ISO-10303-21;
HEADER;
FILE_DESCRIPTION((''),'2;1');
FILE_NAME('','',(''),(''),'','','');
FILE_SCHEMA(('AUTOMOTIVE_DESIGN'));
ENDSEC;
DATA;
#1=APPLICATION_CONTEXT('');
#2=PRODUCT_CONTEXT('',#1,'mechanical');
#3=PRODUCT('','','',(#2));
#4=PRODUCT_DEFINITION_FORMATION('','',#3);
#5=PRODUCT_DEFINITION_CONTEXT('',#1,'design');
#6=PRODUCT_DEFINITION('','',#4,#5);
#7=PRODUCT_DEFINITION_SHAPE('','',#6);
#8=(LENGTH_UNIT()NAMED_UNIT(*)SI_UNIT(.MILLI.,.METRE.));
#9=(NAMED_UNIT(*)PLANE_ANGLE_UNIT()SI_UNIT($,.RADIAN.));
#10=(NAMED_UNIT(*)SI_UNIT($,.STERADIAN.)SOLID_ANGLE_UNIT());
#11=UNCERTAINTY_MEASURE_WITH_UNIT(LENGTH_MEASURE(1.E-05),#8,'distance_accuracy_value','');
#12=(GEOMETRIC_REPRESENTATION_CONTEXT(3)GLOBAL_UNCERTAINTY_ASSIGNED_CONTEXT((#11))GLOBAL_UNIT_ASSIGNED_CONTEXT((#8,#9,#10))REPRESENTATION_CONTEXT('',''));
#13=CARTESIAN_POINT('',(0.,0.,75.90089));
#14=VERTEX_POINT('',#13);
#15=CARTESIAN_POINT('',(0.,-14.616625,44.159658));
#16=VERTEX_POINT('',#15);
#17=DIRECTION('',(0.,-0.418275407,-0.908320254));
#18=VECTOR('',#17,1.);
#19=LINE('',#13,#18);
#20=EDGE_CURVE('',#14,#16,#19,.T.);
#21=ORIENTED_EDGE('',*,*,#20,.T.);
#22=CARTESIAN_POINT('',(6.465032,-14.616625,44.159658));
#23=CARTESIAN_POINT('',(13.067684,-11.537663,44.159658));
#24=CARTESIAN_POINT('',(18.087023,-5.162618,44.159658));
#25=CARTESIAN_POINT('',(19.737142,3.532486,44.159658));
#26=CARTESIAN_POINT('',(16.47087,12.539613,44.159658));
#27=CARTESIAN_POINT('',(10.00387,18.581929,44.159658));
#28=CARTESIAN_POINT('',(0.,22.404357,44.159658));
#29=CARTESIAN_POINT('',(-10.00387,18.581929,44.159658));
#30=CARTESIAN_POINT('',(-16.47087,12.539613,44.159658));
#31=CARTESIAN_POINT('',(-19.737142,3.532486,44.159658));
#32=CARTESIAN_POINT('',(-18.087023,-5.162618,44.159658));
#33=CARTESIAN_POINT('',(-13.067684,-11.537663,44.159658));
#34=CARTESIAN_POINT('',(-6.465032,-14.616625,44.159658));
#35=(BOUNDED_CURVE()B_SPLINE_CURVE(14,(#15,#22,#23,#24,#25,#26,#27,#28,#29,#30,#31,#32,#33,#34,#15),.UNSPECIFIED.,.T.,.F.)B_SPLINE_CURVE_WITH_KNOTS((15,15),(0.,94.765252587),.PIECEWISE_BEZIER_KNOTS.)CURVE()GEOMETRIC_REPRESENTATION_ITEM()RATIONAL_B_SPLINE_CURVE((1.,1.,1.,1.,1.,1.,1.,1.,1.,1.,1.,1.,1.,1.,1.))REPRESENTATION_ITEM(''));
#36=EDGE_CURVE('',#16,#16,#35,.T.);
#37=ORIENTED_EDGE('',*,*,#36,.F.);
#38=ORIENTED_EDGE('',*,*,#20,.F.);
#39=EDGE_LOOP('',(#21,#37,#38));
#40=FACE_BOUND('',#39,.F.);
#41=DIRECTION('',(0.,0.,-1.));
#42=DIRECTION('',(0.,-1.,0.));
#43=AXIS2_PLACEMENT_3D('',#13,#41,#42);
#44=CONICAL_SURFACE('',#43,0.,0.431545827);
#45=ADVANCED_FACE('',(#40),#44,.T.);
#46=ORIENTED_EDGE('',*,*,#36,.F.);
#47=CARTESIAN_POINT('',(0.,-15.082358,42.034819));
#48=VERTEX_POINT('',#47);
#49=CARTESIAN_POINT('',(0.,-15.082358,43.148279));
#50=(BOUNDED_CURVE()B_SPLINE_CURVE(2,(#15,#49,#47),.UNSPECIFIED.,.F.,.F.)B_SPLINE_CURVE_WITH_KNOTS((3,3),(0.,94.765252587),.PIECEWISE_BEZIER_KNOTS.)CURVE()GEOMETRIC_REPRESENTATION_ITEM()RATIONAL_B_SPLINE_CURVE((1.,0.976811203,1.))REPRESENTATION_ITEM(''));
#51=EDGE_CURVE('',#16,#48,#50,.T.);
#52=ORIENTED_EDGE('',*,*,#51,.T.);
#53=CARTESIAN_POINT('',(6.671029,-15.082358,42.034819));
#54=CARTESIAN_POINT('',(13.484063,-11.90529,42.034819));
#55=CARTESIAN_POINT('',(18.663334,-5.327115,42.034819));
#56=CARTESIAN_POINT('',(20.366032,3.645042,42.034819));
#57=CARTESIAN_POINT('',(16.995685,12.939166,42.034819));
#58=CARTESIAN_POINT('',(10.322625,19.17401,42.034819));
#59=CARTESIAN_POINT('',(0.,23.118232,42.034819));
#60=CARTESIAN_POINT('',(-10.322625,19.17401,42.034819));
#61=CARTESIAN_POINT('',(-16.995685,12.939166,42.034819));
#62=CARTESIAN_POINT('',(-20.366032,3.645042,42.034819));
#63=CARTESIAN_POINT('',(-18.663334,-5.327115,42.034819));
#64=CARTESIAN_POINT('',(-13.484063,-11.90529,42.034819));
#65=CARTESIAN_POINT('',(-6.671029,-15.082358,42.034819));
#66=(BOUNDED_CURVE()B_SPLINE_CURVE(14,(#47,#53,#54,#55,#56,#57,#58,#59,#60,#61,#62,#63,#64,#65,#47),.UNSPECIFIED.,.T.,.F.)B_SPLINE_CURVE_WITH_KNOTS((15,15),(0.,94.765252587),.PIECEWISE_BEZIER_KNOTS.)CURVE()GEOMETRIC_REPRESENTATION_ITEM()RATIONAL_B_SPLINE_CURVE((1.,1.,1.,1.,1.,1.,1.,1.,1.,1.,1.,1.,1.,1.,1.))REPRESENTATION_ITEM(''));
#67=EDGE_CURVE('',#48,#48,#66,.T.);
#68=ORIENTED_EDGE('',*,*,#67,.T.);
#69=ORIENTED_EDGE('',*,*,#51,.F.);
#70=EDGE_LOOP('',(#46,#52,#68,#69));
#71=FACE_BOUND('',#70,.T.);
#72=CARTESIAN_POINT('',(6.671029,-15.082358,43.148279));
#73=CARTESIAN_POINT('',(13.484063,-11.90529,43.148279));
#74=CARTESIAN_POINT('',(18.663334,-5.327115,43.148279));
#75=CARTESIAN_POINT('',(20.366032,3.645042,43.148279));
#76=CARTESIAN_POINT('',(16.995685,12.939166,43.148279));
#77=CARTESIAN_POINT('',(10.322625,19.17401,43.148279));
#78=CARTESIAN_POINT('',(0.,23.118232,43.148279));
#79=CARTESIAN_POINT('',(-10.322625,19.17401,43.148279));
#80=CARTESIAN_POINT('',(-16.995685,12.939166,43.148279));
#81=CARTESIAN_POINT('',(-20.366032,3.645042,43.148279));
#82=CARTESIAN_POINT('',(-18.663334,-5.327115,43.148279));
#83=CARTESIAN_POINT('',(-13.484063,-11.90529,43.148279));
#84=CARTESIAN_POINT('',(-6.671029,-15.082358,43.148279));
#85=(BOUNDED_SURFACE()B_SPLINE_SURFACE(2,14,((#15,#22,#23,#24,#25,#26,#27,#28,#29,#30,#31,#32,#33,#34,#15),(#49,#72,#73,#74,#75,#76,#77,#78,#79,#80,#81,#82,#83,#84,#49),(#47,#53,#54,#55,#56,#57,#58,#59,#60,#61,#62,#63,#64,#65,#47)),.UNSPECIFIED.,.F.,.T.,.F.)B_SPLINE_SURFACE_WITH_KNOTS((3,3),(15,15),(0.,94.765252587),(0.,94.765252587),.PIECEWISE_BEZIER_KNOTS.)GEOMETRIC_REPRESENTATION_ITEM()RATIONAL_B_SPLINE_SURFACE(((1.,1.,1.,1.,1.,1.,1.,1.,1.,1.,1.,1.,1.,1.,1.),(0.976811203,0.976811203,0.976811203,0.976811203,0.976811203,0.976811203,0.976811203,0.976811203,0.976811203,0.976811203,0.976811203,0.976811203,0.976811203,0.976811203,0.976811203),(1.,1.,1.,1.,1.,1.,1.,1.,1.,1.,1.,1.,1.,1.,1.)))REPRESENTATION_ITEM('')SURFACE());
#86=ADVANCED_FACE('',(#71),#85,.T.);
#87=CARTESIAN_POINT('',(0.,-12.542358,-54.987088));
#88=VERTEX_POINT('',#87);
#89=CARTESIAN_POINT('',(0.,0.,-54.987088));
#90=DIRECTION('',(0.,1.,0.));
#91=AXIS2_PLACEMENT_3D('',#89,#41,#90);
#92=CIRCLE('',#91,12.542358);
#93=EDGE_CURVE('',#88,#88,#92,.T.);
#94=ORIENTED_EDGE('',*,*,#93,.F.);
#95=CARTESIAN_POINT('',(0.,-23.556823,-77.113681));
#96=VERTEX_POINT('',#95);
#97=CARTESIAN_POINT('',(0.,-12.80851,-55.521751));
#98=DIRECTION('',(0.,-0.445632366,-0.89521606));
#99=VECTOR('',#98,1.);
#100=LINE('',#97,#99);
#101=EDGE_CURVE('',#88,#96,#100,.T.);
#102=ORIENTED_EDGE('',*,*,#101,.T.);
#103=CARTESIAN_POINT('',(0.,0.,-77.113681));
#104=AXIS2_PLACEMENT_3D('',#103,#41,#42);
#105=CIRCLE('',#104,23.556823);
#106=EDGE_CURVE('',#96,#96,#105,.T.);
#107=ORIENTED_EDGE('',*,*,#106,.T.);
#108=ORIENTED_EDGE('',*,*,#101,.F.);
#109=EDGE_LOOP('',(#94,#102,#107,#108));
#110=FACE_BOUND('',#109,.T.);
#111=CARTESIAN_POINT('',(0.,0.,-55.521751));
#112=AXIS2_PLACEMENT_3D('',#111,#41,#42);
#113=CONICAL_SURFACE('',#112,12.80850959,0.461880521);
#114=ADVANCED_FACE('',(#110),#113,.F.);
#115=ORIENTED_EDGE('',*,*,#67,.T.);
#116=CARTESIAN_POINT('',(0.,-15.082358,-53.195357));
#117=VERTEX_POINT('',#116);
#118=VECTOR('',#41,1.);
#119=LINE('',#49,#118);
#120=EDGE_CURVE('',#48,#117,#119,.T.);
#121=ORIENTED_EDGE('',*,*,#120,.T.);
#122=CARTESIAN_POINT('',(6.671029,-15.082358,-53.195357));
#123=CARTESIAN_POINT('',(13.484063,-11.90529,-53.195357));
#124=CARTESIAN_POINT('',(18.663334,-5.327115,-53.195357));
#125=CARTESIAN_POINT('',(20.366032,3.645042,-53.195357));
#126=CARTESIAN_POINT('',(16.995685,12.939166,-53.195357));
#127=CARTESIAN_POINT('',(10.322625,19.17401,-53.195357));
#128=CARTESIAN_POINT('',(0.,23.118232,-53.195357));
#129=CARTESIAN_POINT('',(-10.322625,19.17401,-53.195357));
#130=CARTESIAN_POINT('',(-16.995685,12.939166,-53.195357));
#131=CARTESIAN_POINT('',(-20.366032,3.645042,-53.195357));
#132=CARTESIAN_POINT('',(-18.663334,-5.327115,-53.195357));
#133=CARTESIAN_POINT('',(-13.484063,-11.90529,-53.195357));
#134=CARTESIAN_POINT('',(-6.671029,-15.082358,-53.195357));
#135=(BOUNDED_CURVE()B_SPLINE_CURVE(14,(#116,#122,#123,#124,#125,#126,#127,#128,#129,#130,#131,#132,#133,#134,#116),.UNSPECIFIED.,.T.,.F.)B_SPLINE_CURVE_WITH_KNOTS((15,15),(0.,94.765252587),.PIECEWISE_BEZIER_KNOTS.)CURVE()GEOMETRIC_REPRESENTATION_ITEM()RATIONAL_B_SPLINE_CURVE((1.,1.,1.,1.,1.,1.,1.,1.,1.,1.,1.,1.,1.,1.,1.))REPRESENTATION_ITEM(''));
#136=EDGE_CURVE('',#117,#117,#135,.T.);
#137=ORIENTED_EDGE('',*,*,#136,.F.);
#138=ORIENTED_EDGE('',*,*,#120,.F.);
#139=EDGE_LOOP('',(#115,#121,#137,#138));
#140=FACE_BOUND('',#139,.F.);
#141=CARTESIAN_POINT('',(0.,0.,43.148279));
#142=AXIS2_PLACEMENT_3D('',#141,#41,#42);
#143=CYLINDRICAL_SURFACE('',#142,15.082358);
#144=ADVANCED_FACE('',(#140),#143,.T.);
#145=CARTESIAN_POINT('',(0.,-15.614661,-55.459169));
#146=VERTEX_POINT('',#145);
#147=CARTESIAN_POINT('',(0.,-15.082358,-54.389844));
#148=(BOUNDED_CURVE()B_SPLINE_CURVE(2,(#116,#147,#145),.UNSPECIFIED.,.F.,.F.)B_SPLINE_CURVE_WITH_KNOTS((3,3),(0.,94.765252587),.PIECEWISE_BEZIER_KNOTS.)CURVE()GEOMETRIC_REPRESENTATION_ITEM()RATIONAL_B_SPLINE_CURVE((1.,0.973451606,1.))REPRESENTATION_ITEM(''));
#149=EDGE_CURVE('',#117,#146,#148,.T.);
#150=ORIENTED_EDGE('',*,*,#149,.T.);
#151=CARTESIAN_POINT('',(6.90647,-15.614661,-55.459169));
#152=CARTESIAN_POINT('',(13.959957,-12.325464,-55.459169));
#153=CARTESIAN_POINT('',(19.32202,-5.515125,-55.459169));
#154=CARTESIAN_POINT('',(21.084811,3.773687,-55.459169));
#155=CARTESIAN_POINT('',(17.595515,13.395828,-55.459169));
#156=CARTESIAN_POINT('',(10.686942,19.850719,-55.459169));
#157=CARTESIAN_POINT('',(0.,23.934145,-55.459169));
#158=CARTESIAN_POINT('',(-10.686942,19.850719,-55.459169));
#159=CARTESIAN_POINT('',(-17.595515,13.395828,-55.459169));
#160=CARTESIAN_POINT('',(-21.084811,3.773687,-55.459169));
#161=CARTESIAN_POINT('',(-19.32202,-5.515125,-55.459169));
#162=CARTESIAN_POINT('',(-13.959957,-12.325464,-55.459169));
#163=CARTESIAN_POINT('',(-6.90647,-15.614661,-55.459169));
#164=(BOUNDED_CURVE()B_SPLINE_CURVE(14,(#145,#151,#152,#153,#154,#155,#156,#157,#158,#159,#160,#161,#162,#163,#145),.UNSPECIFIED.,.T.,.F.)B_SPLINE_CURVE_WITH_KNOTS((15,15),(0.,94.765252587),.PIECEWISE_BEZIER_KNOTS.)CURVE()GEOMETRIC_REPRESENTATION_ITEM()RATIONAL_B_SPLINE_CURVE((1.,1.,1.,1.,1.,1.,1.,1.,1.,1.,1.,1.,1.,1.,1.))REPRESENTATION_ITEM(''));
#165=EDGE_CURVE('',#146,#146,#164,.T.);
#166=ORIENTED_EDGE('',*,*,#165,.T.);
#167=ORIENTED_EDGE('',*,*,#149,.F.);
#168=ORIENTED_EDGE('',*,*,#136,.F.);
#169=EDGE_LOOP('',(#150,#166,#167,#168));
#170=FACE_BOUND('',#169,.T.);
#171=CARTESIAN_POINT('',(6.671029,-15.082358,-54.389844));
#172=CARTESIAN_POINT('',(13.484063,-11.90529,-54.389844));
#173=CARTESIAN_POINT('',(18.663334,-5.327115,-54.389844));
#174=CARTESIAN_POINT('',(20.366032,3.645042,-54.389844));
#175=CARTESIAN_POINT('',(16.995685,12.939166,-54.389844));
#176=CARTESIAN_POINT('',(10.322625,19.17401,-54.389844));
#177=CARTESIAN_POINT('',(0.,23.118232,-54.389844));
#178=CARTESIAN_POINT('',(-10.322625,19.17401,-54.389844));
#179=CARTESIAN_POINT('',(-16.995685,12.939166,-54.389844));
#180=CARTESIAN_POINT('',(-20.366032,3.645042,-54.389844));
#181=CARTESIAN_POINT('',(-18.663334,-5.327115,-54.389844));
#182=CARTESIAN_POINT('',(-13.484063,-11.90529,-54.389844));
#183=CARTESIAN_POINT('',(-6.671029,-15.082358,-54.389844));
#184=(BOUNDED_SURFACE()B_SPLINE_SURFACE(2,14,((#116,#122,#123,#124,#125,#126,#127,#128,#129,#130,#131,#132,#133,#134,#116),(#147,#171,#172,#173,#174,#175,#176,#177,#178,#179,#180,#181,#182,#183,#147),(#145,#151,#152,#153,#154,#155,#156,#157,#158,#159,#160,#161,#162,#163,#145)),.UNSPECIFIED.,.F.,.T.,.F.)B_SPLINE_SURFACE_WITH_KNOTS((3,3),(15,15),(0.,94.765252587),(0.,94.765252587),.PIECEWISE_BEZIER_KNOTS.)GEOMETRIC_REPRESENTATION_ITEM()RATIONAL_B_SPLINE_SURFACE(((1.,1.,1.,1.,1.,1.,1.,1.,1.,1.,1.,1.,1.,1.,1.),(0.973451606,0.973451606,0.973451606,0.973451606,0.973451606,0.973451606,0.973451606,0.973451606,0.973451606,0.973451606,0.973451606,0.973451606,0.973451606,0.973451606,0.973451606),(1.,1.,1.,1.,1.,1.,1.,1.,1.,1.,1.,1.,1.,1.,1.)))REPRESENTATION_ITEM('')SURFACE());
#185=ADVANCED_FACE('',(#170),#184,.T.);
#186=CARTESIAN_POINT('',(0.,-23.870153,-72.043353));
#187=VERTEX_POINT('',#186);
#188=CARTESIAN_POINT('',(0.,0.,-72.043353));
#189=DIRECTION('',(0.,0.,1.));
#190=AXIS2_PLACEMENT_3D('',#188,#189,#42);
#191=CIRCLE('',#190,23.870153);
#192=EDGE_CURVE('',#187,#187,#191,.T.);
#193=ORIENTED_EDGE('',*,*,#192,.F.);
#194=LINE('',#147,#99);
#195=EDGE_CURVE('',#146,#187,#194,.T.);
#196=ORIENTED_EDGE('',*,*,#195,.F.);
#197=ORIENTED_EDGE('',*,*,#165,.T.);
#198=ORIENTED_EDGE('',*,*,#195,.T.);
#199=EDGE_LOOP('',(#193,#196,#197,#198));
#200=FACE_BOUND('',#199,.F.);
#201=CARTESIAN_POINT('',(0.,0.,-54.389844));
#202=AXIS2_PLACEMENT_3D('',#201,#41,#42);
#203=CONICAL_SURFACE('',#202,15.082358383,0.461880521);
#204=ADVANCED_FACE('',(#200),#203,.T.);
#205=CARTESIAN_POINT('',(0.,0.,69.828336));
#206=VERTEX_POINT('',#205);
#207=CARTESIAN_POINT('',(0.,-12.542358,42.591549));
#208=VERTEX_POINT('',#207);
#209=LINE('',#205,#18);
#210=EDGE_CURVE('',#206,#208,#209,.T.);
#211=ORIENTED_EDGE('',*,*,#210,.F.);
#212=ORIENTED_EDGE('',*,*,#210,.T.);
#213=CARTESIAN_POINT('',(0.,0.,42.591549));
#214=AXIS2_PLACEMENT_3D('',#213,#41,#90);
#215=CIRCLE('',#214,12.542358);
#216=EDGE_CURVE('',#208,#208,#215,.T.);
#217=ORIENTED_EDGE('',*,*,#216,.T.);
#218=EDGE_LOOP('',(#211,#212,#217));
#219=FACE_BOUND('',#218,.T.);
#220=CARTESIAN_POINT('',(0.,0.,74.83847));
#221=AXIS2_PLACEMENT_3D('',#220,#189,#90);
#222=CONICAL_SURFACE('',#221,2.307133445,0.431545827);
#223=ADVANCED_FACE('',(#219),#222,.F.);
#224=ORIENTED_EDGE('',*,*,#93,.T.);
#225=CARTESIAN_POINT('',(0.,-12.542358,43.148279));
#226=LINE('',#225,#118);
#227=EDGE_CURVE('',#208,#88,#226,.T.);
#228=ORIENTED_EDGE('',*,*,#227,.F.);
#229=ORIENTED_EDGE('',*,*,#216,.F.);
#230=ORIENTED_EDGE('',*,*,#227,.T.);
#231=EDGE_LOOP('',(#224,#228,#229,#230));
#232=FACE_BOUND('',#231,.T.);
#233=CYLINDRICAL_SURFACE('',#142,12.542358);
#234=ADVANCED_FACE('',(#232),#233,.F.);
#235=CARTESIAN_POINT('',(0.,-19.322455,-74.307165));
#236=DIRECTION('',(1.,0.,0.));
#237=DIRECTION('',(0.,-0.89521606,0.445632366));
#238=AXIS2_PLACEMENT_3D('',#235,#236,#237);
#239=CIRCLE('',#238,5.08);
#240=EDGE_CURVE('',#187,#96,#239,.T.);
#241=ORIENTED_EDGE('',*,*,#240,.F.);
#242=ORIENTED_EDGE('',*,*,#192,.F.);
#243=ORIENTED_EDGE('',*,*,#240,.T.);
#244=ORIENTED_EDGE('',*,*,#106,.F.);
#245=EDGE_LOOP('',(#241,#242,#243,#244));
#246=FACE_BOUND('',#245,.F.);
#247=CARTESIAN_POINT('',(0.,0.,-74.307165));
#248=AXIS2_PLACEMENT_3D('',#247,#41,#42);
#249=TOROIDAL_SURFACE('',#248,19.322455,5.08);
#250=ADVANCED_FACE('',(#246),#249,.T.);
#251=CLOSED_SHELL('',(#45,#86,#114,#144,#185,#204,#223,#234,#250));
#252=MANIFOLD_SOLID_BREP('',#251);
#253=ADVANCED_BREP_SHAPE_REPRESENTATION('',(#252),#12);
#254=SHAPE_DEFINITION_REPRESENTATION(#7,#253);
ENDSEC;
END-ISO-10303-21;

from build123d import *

# Parameters (mm, degrees)
F3_T = -2.54
F4_R = 5.08


# Not quite as in the source:
# - a fillet or chamfer that OpenCascade refuses, or shapes differently, is made with other operations: its cross-section is extruded or revolved along the edge and cut away or added


with BuildPart() as f2:
    # F0 (on Right) → F2 (revolve)
    with BuildSketch(Plane.YZ):
        Polygon((0, -77.1136805415), (0, 0), (0, 75.9008899331), (-15.0823583826, 43.1482791901), (-15.0823583826, -54.3898443918), (-26.3941269368, -77.1136805415), align=None)
    revolve(axis=Axis((0, 0, 37.9504449666), (0, 0, 1)))

    # F3
    f3_openings = [f2.faces().sort_by_distance(p)[0] for p in [
        (0, 0, -77.113681),
    ]]
    offset(amount=F3_T, openings=f3_openings, kind=Kind.INTERSECTION)

    # F4
    f4_edges = [f2.edges().sort_by_distance(p)[0] for p in [
        (0, 15.082358, 43.148279),
        (0, 15.082358, -54.389844),
        (0, -15.082358, -5.620783),
    ]]
    fillet(f4_edges, radius=F4_R)

    # F5: fillet of radius 5.08 on 3 edges, made by hand

    # F5_s1 → F5_t2 (revolve, cut)
    with BuildSketch(Plane.YZ):
        with BuildLine():
            ThreePointArc((-23.8701527835, -72.0433526939), (-24.3927830464, -74.6204948412), (-23.5568230573, -77.1136805415))
            Line((-23.5568230573, -77.1136805415), (-26.3941269368, -77.1136805415))
            Line((-26.3941269368, -77.1136805415), (-23.8701527835, -72.0433526939))
        make_face()
    revolve(axis=Axis((0, 0, -77.1136805415), (0, 0, 1)), mode=Mode.SUBTRACT)


solid = f2.part
